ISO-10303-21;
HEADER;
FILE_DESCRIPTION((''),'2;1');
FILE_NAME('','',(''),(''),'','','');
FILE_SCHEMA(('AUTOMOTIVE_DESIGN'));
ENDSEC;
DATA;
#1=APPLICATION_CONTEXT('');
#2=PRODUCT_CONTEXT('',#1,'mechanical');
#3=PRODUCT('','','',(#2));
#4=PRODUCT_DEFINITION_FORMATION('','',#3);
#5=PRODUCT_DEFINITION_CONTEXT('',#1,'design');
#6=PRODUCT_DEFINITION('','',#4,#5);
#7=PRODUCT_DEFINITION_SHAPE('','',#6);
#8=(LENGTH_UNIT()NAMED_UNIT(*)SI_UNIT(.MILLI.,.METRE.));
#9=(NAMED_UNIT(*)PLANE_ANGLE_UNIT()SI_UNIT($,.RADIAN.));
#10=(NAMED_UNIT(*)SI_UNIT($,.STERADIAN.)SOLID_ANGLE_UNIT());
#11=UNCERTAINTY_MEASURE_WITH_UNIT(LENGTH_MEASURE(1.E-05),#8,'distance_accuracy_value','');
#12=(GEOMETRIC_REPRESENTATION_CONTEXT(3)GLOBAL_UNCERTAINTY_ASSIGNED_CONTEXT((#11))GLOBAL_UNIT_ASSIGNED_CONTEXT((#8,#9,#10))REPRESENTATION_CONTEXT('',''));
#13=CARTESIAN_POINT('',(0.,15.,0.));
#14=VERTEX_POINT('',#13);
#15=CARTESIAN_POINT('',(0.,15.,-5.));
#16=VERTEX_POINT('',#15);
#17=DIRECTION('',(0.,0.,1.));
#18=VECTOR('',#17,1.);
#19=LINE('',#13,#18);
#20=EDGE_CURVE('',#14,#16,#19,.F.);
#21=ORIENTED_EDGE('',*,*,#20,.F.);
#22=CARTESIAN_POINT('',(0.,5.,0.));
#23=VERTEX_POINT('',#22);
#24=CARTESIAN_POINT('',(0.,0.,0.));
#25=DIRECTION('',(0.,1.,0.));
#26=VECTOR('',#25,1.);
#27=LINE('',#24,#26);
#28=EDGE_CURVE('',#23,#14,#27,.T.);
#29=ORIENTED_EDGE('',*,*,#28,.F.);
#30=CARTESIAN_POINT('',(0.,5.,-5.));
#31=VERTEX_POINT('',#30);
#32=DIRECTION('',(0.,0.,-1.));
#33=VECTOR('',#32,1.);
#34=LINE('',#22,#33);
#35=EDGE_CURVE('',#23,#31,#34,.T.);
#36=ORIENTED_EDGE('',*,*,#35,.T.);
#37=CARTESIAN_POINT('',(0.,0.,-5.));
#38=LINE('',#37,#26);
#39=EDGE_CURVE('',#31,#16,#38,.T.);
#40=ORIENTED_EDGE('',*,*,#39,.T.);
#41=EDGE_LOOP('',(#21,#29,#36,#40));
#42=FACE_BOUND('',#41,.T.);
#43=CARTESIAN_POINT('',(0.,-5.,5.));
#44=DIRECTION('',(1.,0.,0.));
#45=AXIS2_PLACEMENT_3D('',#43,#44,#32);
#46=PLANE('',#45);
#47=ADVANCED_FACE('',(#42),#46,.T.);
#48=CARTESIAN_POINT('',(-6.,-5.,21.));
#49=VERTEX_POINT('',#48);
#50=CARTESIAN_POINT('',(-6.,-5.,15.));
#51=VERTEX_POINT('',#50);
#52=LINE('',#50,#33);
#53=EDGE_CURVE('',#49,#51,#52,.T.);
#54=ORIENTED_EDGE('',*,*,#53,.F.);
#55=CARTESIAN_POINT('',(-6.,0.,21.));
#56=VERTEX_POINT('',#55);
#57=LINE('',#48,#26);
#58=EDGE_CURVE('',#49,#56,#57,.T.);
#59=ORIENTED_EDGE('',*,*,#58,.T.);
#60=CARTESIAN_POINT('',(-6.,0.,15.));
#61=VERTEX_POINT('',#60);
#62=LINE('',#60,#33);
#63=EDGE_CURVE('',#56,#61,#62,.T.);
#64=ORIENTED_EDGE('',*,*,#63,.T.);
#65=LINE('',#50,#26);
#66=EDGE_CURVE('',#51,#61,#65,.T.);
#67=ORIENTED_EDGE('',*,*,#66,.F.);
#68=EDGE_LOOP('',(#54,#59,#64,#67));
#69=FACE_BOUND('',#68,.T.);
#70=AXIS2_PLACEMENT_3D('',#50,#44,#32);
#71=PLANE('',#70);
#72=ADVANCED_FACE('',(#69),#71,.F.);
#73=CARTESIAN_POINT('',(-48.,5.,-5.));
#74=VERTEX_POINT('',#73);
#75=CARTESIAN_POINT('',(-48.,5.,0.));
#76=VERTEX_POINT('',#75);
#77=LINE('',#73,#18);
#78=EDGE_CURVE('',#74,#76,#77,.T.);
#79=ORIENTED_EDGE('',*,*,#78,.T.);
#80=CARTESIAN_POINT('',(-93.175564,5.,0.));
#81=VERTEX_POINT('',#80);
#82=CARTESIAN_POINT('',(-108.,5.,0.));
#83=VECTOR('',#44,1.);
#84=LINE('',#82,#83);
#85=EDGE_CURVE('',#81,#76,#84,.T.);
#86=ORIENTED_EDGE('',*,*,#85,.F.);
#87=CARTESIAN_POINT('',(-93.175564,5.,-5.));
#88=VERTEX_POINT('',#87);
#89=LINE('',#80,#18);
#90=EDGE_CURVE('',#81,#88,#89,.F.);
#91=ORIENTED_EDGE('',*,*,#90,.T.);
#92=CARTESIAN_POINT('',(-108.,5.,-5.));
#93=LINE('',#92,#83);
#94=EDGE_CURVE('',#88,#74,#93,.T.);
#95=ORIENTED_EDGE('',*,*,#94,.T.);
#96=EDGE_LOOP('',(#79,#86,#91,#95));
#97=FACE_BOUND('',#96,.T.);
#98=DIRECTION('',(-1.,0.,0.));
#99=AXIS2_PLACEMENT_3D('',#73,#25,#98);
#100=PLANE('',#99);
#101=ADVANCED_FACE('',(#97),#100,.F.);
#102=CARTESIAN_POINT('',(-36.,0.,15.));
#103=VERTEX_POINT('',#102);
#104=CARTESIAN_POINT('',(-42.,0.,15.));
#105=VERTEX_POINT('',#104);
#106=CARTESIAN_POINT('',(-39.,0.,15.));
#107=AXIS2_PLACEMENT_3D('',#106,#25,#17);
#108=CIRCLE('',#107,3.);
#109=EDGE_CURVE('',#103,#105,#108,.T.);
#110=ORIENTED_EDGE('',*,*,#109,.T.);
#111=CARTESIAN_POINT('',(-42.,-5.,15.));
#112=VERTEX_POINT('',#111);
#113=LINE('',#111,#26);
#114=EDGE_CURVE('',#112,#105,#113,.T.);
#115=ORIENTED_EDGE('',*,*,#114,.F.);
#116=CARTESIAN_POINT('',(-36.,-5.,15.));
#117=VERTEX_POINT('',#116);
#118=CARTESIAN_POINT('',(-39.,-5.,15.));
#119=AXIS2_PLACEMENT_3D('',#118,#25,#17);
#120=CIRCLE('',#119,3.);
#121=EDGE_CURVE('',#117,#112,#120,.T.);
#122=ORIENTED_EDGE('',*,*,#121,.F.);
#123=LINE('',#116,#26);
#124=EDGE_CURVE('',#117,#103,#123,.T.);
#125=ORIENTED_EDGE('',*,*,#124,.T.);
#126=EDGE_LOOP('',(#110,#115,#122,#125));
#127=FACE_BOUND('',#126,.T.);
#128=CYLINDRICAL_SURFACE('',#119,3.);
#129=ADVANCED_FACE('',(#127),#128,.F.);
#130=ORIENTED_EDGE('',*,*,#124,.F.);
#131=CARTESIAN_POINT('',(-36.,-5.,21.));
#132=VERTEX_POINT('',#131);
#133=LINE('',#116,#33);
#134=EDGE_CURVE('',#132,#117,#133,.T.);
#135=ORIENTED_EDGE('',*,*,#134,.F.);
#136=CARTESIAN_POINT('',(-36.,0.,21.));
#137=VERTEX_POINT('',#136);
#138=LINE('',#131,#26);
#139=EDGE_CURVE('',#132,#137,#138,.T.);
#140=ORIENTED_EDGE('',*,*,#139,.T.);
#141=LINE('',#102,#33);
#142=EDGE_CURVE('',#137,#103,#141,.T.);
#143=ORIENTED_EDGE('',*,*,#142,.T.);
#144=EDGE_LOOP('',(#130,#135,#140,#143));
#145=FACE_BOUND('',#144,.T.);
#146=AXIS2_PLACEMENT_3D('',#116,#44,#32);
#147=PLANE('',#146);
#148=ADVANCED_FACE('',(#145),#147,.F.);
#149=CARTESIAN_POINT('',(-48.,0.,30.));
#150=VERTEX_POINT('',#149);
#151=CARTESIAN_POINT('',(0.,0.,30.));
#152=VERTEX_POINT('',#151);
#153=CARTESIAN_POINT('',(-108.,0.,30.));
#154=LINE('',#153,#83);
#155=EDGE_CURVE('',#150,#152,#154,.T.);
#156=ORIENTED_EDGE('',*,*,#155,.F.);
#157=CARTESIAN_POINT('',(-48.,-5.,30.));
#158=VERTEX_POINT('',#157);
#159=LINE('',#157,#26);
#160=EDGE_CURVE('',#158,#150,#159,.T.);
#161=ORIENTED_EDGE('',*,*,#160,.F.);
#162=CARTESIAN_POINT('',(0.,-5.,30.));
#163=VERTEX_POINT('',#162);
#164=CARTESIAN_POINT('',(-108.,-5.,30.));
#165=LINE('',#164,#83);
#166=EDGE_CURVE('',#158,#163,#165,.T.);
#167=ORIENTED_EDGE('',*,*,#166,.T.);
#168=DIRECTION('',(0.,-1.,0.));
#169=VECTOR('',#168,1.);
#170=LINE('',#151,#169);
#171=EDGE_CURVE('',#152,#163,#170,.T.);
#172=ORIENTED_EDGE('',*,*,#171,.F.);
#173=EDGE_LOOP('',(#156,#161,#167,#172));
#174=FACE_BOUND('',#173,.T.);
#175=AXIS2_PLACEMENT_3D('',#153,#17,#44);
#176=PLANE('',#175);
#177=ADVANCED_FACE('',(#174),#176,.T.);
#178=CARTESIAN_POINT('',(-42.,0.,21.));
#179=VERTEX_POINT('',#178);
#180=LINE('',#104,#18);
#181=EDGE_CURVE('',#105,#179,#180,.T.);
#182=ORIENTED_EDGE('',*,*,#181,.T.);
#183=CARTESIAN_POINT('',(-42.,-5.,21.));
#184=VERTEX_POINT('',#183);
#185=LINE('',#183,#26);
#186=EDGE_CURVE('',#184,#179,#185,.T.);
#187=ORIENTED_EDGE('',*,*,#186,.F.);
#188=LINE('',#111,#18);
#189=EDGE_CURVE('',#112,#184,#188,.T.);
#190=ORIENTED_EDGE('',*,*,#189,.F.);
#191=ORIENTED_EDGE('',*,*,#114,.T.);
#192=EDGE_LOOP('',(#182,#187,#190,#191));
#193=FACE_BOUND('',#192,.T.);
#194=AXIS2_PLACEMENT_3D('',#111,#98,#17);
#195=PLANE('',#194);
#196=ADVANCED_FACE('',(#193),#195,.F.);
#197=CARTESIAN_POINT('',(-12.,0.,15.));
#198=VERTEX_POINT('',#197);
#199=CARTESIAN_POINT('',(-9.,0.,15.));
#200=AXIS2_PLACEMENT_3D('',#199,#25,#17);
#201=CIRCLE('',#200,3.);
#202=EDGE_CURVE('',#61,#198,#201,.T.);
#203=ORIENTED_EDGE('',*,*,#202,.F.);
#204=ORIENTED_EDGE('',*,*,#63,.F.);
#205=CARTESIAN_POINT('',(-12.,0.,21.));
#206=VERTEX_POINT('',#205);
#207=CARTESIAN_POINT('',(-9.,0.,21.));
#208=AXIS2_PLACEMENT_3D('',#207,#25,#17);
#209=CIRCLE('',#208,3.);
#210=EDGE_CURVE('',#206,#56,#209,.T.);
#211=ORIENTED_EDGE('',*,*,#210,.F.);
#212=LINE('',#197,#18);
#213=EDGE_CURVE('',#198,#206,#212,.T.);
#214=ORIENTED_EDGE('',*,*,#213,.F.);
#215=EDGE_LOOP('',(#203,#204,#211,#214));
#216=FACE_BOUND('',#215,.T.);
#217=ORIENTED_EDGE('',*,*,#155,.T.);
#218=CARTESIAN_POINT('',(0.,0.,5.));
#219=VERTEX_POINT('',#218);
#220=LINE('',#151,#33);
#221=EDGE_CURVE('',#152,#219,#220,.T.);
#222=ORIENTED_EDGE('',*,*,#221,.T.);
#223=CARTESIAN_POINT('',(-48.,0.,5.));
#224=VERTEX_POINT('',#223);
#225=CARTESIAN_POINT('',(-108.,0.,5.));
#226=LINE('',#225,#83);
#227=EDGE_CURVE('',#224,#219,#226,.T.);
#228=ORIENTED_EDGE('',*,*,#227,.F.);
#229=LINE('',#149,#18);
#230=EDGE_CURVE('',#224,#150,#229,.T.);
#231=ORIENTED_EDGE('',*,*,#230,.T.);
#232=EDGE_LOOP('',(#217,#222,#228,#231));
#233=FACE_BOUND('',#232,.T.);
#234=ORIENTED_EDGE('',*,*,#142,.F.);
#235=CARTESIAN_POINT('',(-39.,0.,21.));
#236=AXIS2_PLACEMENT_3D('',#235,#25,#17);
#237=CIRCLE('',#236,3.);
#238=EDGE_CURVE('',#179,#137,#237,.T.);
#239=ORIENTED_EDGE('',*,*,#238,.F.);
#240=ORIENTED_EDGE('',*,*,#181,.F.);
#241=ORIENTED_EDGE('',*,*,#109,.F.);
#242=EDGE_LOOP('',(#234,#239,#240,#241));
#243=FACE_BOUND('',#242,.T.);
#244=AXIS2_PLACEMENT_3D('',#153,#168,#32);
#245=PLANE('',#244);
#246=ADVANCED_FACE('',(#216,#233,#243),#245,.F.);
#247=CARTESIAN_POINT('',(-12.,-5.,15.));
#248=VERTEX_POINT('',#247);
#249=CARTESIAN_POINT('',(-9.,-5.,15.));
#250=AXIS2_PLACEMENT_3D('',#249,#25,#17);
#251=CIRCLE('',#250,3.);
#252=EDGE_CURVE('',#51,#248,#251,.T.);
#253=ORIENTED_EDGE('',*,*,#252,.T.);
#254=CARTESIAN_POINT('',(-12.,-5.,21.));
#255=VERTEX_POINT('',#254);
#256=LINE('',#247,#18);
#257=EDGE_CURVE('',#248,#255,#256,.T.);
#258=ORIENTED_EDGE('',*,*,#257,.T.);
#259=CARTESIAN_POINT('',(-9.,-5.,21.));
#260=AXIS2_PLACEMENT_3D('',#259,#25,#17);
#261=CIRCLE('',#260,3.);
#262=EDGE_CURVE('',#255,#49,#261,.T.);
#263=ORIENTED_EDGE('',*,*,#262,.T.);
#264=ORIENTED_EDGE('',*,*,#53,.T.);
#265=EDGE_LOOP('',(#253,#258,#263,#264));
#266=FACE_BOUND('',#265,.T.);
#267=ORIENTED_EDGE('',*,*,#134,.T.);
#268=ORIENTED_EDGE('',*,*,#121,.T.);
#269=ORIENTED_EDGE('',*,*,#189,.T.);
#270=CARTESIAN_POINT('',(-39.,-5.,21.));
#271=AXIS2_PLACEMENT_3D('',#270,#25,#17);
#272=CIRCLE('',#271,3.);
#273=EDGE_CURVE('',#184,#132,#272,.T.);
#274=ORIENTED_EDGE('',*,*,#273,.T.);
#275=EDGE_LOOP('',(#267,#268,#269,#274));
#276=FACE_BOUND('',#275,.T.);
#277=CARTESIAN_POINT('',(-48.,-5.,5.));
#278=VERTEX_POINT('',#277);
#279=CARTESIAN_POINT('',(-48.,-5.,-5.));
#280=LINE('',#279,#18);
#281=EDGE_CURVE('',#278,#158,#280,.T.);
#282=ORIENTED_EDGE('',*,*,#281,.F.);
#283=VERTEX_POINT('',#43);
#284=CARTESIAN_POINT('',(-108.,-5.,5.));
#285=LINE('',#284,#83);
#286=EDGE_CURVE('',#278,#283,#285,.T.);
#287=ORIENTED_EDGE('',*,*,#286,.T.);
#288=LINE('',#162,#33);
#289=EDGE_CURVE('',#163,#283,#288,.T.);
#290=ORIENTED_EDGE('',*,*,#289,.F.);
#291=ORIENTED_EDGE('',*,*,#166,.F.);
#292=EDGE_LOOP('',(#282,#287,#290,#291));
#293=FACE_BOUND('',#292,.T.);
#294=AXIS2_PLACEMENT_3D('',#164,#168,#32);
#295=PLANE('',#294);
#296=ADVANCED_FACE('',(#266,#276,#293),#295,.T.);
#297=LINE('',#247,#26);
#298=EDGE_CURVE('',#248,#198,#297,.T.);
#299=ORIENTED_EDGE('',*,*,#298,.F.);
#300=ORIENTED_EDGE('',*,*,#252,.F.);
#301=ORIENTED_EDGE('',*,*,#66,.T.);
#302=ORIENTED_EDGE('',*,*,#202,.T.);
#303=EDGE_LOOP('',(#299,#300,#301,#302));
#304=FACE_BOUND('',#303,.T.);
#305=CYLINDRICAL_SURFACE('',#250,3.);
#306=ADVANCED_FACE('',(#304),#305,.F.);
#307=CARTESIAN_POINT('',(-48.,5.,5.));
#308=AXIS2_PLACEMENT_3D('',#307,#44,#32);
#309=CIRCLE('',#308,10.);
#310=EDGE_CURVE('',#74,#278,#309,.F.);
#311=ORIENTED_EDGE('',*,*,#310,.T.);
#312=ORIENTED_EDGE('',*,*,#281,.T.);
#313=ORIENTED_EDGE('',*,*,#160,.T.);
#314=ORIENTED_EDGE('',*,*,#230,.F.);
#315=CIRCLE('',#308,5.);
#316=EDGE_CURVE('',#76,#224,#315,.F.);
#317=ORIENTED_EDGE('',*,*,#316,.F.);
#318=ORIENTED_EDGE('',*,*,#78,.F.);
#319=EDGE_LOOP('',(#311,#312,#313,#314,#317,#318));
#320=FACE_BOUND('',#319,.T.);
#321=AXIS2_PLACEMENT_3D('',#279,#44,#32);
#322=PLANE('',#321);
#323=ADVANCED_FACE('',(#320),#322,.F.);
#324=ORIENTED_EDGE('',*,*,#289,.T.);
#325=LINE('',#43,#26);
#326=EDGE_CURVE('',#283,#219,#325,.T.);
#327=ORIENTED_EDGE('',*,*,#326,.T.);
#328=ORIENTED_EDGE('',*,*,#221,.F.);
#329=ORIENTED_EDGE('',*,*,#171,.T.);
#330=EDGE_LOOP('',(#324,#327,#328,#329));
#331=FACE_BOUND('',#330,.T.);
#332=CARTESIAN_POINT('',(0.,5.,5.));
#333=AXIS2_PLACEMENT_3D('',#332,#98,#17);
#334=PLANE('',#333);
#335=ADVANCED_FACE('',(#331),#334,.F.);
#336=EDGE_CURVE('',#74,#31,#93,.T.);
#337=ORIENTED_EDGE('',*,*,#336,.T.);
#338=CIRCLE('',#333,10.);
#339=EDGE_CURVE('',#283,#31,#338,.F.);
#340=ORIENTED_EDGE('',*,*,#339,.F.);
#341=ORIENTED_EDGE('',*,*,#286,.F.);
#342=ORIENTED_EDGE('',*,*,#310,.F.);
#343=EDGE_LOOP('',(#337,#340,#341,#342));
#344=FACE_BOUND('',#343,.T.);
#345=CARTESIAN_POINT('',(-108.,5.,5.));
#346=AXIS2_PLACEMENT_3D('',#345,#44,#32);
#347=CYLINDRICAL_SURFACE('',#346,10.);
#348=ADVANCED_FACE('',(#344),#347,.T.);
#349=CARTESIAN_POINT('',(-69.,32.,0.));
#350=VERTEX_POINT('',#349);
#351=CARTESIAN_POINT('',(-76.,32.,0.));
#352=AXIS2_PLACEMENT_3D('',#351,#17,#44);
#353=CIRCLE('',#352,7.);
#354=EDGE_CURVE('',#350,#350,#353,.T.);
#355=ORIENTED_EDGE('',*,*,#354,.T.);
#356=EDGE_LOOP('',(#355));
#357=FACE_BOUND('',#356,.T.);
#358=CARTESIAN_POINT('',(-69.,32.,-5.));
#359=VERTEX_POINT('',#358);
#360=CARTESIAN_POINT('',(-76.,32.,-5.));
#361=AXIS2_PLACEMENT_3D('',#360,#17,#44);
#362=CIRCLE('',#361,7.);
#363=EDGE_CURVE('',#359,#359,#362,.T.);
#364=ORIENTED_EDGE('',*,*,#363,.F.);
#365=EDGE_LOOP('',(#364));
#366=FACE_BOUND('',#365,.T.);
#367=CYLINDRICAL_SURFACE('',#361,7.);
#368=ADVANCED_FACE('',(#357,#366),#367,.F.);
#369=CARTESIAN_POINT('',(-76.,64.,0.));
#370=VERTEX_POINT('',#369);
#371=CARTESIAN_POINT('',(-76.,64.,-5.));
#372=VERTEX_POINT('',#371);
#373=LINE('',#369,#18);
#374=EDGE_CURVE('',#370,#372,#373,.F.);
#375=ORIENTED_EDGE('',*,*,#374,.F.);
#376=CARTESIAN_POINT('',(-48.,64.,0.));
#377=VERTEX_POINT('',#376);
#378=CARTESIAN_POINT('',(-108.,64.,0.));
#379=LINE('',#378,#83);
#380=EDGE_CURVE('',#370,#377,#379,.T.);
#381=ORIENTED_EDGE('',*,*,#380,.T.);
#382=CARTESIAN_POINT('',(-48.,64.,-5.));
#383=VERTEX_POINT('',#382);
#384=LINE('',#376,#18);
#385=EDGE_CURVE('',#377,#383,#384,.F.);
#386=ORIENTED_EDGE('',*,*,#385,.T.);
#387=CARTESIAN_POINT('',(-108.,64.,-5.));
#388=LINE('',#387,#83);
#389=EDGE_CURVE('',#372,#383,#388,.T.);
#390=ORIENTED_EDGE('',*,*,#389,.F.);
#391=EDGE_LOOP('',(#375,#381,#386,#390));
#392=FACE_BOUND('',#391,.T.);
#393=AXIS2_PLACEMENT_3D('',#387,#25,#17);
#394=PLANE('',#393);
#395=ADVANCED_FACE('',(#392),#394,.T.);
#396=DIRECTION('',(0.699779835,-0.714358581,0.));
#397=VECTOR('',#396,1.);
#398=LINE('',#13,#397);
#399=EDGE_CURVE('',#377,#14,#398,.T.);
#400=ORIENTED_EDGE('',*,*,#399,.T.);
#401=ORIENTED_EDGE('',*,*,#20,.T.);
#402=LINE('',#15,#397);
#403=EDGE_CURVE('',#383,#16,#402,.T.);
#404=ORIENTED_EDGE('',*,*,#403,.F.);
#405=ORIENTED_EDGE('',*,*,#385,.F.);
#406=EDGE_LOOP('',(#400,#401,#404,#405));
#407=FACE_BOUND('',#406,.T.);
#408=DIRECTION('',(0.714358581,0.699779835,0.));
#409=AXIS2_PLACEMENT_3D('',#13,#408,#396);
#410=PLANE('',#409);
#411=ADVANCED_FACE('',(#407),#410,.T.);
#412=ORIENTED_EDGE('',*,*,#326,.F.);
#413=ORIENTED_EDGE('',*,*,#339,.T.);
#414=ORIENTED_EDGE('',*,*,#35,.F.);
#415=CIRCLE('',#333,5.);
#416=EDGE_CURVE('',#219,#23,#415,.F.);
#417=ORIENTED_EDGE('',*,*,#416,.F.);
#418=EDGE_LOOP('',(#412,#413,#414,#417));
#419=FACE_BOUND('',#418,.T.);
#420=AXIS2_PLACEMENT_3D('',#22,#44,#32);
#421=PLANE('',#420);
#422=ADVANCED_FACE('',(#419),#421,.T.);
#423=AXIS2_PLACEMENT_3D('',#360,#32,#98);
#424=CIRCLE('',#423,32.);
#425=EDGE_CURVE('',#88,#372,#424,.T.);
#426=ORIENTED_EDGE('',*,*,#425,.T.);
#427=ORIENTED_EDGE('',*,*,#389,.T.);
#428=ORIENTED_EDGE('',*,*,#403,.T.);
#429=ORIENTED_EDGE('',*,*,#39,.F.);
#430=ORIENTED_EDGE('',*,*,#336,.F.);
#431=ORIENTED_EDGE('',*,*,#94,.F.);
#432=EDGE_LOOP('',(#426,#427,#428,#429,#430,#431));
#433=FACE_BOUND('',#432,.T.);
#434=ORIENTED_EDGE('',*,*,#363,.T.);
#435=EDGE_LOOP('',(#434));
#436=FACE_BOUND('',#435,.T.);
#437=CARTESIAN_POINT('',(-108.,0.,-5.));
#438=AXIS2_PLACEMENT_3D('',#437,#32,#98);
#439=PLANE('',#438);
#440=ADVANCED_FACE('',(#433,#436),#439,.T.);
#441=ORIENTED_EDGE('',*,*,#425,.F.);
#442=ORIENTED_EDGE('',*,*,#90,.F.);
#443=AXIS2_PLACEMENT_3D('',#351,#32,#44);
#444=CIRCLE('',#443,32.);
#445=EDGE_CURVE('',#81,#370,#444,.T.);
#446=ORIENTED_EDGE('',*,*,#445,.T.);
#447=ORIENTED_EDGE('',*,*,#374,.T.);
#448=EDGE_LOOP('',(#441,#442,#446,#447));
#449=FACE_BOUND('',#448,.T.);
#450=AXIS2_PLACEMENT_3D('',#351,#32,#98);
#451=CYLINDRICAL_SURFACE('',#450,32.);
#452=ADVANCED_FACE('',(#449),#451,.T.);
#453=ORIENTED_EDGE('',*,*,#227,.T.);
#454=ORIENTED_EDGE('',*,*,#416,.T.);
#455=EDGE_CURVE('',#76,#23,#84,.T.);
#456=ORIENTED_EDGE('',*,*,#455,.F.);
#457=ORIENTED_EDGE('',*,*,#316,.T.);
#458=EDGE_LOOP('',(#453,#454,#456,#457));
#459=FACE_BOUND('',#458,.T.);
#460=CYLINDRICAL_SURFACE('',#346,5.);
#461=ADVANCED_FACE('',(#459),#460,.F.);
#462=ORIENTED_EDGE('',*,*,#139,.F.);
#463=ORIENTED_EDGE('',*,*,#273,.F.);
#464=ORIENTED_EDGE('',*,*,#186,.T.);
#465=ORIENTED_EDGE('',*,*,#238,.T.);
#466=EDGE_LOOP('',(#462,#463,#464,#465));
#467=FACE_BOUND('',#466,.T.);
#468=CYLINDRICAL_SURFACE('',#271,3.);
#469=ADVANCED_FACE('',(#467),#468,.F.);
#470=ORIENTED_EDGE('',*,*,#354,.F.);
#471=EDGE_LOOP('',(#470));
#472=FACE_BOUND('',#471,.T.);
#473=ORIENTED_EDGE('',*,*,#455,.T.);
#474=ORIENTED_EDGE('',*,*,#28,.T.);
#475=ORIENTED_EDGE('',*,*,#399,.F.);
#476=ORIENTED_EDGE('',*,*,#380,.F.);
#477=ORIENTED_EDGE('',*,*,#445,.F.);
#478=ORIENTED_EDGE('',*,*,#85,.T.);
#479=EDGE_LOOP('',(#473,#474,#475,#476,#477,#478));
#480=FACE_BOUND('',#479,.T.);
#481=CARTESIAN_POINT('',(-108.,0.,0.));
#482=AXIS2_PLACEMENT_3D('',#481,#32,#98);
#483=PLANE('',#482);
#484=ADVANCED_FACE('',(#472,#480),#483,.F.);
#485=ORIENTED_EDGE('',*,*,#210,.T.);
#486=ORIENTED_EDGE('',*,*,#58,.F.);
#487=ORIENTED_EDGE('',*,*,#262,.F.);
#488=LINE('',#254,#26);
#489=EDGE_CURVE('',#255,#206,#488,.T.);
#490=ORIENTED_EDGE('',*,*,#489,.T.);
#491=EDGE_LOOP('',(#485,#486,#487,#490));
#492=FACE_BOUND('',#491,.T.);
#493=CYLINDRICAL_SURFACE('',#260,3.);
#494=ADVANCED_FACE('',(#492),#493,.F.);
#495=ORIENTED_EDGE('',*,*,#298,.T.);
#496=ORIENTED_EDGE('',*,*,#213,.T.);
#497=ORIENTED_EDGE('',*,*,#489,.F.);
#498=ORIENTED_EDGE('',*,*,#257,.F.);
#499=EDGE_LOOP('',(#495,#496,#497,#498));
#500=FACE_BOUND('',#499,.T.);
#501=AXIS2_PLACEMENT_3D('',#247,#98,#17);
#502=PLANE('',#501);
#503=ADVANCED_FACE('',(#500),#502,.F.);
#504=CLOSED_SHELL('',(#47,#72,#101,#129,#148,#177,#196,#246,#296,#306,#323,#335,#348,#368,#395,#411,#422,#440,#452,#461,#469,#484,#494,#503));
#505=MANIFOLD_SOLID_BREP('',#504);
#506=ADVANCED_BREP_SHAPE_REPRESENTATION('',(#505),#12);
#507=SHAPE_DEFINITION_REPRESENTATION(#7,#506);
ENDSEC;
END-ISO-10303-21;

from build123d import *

# Parameters (mm, degrees)
T_LE_DE_BASE_PLI_E1_DEPTH    = 108
ESQUISSE2_W                  = 60
ESQUISSE2_H                  = 10
ENL_V_MAT_EXTRU_1_DEPTH      = 131.326513036
ENL_V_MAT_EXTRU_2_DEPTH      = 10
ENL_V_MAT_EXTRU_3_DEPTH      = 3
ENL_V_MAT_EXTRU_3_DEPTH_BACK = 130.073622402
ENL_V_MAT_EXTRU_4_DEPTH      = 10
ESQUISSE6_R                  = 7
ENL_V_MAT_EXTRU_5_DEPTH      = 10


# Sheet-metal steps are written as plain solids
with BuildPart() as part:
    # Esquisse1 → Tôle de base pliée1 (new body)
    with BuildSketch(Plane.ZY):
        with BuildLine():
            Line((30, 0), (5, 0))
            ThreePointArc((5, 0), (1.464466094, 1.464466094), (0, 5))
            Line((0, 5), (0, 64))
            Line((0, 64), (-5, 64))
            Line((-5, 64), (-5, 5))
            ThreePointArc((-5, 5), (-2.071067812, -2.071067812), (5, -5))
            Line((5, -5), (30, -5))
            Line((30, -5), (30, 0))
        make_face()
    extrude(amount=T_LE_DE_BASE_PLI_E1_DEPTH)

    # Esquisse2 → Enlèv. mat.-Extru.1 (cut, through all)
    with BuildSketch(Plane.XY.offset(30)):
        with Locations((-78, 0)):
            Rectangle(ESQUISSE2_W, ESQUISSE2_H)
    extrude(amount=-ENL_V_MAT_EXTRU_1_DEPTH, mode=Mode.SUBTRACT)

    # Esquisse3 → Enlèv. mat.-Extru.2 (cut)
    with BuildSketch(Plane.XY):
        with BuildLine():
            Line((-76, 64), (-123.136026385, 64))
            Line((-123.136026385, 64), (-123.136026385, 0))
            Line((-123.136026385, 0), (-76, 0))
            ThreePointArc((-76, 0), (-108, 32), (-76, 64))
        make_face()
    extrude(amount=-ENL_V_MAT_EXTRU_2_DEPTH, mode=Mode.SUBTRACT)

    # Esquisse4 → Enlèv. mat.-Extru.3 (cut, two sides: drawn at the far end of the back side and taken through both)
    with BuildSketch(Plane.XY.offset(-ENL_V_MAT_EXTRU_3_DEPTH_BACK)):
        Polygon((172.979910748, -161.583658888), (0, 15), (-48, 64), (-220.979910748, 240.583658888), (132.187407029, 586.543480383), (526.147228524, 184.376162607), align=None)
    extrude(amount=ENL_V_MAT_EXTRU_3_DEPTH + ENL_V_MAT_EXTRU_3_DEPTH_BACK, mode=Mode.SUBTRACT)

    # Esquisse5 → Enlèv. mat.-Extru.4 (cut)
    with BuildSketch(Plane(origin=(0, 0, 0), x_dir=(1, 0, 0), z_dir=(0, 1, 0))):
        with BuildLine():
            Line((-36, -15), (-36, -21))
            ThreePointArc((-36, -21), (-39, -24), (-42, -21))
            Line((-42, -21), (-42, -15))
            ThreePointArc((-42, -15), (-39, -12), (-36, -15))
        make_face()
        with BuildLine():
            Line((-6, -15), (-6, -21))
            ThreePointArc((-6, -21), (-9, -24), (-12, -21))
            Line((-12, -21), (-12, -15))
            ThreePointArc((-12, -15), (-9, -12), (-6, -15))
        make_face()
    extrude(amount=-ENL_V_MAT_EXTRU_4_DEPTH, mode=Mode.SUBTRACT)

    # Esquisse6 → Enlèv. mat.-Extru.5 (cut)
    with BuildSketch(Plane.XY):
        with Locations((-76, 32)):
            Circle(ESQUISSE6_R)
    extrude(amount=-ENL_V_MAT_EXTRU_5_DEPTH, mode=Mode.SUBTRACT)


solid = part.part
